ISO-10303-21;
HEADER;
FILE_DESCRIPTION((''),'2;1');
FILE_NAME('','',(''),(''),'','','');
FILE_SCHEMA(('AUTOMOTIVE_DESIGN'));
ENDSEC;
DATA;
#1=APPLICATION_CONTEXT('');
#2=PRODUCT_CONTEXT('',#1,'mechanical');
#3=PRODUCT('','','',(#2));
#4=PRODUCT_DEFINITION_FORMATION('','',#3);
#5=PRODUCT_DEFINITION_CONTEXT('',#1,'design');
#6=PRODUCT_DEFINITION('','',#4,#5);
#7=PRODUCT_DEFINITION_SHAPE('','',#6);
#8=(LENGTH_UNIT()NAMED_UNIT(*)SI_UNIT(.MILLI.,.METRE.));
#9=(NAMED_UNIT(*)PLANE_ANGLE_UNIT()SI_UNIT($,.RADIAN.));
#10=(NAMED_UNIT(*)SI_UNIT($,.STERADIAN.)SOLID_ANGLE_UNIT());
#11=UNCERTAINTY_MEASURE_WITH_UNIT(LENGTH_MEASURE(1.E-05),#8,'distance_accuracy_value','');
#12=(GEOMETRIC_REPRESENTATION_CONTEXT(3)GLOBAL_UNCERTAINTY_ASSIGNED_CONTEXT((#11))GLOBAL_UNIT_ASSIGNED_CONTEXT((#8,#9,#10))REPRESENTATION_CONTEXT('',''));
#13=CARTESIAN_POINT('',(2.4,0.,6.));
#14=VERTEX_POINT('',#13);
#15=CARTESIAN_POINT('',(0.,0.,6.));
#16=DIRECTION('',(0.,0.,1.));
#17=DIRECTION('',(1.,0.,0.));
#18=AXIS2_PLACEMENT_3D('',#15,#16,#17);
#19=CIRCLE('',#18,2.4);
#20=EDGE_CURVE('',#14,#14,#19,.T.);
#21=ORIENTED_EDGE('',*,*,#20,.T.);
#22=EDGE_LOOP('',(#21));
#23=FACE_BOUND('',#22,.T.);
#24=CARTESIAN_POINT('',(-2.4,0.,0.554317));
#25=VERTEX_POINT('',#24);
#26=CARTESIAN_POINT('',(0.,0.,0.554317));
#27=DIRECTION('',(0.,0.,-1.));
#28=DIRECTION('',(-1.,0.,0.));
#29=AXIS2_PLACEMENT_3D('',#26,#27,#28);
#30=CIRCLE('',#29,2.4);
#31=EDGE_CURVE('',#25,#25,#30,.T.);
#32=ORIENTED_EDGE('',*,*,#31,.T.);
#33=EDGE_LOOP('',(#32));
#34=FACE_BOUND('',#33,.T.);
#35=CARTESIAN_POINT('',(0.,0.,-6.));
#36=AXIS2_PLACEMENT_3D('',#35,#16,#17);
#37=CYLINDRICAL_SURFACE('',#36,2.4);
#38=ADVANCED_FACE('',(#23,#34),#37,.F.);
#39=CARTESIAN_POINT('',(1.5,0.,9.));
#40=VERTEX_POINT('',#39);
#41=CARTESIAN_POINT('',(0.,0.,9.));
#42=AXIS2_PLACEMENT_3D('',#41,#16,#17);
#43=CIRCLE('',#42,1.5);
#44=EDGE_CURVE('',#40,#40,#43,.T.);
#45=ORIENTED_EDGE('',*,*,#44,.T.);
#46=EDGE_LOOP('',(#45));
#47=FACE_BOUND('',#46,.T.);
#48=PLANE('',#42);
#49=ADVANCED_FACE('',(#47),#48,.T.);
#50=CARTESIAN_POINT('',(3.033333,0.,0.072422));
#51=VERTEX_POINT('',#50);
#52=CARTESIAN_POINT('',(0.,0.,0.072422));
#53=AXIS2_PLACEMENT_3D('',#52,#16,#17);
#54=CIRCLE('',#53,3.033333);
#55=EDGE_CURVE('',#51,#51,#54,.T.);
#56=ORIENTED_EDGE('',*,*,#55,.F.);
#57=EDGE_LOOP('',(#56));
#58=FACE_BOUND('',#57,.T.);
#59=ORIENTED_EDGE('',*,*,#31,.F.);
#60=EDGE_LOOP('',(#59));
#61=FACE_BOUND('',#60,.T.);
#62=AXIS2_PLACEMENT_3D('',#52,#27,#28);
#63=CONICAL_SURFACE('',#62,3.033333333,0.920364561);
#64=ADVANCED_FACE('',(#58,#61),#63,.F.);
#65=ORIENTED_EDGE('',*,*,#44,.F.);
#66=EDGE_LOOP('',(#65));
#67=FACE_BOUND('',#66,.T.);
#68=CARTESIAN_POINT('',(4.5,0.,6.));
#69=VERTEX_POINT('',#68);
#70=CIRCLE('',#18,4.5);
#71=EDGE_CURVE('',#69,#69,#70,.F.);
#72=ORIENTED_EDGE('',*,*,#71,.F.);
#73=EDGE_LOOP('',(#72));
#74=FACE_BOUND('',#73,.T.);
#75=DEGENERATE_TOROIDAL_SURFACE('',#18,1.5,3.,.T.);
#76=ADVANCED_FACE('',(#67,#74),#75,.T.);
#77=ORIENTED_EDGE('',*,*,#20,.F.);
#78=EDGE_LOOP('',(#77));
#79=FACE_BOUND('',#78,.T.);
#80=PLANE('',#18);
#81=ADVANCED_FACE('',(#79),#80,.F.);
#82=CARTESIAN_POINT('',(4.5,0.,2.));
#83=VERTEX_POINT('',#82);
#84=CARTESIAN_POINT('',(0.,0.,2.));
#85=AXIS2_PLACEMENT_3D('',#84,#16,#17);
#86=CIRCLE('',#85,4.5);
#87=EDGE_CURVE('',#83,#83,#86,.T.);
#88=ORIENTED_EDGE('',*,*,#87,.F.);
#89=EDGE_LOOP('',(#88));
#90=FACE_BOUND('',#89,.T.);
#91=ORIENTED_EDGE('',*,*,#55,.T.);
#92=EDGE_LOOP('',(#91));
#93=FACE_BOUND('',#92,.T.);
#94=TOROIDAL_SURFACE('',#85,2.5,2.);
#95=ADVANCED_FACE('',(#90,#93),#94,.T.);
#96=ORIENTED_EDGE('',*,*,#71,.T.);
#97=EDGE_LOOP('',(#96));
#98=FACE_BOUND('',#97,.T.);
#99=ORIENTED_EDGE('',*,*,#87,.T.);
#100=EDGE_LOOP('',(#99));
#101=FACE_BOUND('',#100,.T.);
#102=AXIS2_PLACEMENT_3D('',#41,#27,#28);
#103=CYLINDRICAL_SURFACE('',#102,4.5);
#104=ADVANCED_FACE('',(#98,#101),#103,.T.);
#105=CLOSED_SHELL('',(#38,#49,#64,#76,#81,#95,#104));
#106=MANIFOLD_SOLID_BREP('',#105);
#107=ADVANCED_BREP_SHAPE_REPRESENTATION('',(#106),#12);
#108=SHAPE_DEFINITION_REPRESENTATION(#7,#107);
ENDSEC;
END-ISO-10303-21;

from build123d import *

# Parameters (mm, degrees)
SKETCH1_R           = 4.5
SKETCH1_R_2         = 2.4
BOSS_EXTRUDE1_DEPTH = 9
FILLET1_R           = 3
FILLET2_R           = 2
SKETCH1_4_R         = 2.4
CUT_EXTRUDE2_DEPTH  = 6


with BuildPart() as part:
    # Sketch1 → Boss-Extrude1 (new body)
    # profile 1 of 2: a face of its own
    with BuildSketch(Plane.XY):
        Circle(SKETCH1_R)
        Circle(SKETCH1_R_2, mode=Mode.SUBTRACT)
    # profile 2 of 2: a face of its own
    with BuildSketch(Plane.XY):
        Circle(SKETCH1_R_2)
    extrude(amount=BOSS_EXTRUDE1_DEPTH)

    # Fillet1
    fillet1_edges = [part.edges().sort_by_distance(p)[0] for p in [
        (-4.5, 0, 9),
    ]]
    fillet(fillet1_edges, radius=FILLET1_R)

    # Fillet2
    fillet2_edges = [part.edges().sort_by_distance(p)[0] for p in [
        (-4.5, 0, 0),
    ]]
    fillet(fillet2_edges, radius=FILLET2_R)

    # Sketch1<4> → Cut-Extrude2 (cut, symmetric)
    with BuildSketch(Plane.XY):
        Circle(SKETCH1_4_R)
    extrude(amount=CUT_EXTRUDE2_DEPTH, both=True, mode=Mode.SUBTRACT)

    # Chamfer1: read off the stored shape, not the designer's step
    # Chamfer1 outline → Chamfer1 (revolve, cut)
    with BuildSketch(Plane.XZ):
        Polygon((2.4, 0.554316771), (2.4, 0), (3.033333333, 0), (3.033333333, 0.072422361), align=None)
    revolve(axis=Axis((0, 0, 0), (0, 0, 1)), mode=Mode.SUBTRACT)


solid = part.part
